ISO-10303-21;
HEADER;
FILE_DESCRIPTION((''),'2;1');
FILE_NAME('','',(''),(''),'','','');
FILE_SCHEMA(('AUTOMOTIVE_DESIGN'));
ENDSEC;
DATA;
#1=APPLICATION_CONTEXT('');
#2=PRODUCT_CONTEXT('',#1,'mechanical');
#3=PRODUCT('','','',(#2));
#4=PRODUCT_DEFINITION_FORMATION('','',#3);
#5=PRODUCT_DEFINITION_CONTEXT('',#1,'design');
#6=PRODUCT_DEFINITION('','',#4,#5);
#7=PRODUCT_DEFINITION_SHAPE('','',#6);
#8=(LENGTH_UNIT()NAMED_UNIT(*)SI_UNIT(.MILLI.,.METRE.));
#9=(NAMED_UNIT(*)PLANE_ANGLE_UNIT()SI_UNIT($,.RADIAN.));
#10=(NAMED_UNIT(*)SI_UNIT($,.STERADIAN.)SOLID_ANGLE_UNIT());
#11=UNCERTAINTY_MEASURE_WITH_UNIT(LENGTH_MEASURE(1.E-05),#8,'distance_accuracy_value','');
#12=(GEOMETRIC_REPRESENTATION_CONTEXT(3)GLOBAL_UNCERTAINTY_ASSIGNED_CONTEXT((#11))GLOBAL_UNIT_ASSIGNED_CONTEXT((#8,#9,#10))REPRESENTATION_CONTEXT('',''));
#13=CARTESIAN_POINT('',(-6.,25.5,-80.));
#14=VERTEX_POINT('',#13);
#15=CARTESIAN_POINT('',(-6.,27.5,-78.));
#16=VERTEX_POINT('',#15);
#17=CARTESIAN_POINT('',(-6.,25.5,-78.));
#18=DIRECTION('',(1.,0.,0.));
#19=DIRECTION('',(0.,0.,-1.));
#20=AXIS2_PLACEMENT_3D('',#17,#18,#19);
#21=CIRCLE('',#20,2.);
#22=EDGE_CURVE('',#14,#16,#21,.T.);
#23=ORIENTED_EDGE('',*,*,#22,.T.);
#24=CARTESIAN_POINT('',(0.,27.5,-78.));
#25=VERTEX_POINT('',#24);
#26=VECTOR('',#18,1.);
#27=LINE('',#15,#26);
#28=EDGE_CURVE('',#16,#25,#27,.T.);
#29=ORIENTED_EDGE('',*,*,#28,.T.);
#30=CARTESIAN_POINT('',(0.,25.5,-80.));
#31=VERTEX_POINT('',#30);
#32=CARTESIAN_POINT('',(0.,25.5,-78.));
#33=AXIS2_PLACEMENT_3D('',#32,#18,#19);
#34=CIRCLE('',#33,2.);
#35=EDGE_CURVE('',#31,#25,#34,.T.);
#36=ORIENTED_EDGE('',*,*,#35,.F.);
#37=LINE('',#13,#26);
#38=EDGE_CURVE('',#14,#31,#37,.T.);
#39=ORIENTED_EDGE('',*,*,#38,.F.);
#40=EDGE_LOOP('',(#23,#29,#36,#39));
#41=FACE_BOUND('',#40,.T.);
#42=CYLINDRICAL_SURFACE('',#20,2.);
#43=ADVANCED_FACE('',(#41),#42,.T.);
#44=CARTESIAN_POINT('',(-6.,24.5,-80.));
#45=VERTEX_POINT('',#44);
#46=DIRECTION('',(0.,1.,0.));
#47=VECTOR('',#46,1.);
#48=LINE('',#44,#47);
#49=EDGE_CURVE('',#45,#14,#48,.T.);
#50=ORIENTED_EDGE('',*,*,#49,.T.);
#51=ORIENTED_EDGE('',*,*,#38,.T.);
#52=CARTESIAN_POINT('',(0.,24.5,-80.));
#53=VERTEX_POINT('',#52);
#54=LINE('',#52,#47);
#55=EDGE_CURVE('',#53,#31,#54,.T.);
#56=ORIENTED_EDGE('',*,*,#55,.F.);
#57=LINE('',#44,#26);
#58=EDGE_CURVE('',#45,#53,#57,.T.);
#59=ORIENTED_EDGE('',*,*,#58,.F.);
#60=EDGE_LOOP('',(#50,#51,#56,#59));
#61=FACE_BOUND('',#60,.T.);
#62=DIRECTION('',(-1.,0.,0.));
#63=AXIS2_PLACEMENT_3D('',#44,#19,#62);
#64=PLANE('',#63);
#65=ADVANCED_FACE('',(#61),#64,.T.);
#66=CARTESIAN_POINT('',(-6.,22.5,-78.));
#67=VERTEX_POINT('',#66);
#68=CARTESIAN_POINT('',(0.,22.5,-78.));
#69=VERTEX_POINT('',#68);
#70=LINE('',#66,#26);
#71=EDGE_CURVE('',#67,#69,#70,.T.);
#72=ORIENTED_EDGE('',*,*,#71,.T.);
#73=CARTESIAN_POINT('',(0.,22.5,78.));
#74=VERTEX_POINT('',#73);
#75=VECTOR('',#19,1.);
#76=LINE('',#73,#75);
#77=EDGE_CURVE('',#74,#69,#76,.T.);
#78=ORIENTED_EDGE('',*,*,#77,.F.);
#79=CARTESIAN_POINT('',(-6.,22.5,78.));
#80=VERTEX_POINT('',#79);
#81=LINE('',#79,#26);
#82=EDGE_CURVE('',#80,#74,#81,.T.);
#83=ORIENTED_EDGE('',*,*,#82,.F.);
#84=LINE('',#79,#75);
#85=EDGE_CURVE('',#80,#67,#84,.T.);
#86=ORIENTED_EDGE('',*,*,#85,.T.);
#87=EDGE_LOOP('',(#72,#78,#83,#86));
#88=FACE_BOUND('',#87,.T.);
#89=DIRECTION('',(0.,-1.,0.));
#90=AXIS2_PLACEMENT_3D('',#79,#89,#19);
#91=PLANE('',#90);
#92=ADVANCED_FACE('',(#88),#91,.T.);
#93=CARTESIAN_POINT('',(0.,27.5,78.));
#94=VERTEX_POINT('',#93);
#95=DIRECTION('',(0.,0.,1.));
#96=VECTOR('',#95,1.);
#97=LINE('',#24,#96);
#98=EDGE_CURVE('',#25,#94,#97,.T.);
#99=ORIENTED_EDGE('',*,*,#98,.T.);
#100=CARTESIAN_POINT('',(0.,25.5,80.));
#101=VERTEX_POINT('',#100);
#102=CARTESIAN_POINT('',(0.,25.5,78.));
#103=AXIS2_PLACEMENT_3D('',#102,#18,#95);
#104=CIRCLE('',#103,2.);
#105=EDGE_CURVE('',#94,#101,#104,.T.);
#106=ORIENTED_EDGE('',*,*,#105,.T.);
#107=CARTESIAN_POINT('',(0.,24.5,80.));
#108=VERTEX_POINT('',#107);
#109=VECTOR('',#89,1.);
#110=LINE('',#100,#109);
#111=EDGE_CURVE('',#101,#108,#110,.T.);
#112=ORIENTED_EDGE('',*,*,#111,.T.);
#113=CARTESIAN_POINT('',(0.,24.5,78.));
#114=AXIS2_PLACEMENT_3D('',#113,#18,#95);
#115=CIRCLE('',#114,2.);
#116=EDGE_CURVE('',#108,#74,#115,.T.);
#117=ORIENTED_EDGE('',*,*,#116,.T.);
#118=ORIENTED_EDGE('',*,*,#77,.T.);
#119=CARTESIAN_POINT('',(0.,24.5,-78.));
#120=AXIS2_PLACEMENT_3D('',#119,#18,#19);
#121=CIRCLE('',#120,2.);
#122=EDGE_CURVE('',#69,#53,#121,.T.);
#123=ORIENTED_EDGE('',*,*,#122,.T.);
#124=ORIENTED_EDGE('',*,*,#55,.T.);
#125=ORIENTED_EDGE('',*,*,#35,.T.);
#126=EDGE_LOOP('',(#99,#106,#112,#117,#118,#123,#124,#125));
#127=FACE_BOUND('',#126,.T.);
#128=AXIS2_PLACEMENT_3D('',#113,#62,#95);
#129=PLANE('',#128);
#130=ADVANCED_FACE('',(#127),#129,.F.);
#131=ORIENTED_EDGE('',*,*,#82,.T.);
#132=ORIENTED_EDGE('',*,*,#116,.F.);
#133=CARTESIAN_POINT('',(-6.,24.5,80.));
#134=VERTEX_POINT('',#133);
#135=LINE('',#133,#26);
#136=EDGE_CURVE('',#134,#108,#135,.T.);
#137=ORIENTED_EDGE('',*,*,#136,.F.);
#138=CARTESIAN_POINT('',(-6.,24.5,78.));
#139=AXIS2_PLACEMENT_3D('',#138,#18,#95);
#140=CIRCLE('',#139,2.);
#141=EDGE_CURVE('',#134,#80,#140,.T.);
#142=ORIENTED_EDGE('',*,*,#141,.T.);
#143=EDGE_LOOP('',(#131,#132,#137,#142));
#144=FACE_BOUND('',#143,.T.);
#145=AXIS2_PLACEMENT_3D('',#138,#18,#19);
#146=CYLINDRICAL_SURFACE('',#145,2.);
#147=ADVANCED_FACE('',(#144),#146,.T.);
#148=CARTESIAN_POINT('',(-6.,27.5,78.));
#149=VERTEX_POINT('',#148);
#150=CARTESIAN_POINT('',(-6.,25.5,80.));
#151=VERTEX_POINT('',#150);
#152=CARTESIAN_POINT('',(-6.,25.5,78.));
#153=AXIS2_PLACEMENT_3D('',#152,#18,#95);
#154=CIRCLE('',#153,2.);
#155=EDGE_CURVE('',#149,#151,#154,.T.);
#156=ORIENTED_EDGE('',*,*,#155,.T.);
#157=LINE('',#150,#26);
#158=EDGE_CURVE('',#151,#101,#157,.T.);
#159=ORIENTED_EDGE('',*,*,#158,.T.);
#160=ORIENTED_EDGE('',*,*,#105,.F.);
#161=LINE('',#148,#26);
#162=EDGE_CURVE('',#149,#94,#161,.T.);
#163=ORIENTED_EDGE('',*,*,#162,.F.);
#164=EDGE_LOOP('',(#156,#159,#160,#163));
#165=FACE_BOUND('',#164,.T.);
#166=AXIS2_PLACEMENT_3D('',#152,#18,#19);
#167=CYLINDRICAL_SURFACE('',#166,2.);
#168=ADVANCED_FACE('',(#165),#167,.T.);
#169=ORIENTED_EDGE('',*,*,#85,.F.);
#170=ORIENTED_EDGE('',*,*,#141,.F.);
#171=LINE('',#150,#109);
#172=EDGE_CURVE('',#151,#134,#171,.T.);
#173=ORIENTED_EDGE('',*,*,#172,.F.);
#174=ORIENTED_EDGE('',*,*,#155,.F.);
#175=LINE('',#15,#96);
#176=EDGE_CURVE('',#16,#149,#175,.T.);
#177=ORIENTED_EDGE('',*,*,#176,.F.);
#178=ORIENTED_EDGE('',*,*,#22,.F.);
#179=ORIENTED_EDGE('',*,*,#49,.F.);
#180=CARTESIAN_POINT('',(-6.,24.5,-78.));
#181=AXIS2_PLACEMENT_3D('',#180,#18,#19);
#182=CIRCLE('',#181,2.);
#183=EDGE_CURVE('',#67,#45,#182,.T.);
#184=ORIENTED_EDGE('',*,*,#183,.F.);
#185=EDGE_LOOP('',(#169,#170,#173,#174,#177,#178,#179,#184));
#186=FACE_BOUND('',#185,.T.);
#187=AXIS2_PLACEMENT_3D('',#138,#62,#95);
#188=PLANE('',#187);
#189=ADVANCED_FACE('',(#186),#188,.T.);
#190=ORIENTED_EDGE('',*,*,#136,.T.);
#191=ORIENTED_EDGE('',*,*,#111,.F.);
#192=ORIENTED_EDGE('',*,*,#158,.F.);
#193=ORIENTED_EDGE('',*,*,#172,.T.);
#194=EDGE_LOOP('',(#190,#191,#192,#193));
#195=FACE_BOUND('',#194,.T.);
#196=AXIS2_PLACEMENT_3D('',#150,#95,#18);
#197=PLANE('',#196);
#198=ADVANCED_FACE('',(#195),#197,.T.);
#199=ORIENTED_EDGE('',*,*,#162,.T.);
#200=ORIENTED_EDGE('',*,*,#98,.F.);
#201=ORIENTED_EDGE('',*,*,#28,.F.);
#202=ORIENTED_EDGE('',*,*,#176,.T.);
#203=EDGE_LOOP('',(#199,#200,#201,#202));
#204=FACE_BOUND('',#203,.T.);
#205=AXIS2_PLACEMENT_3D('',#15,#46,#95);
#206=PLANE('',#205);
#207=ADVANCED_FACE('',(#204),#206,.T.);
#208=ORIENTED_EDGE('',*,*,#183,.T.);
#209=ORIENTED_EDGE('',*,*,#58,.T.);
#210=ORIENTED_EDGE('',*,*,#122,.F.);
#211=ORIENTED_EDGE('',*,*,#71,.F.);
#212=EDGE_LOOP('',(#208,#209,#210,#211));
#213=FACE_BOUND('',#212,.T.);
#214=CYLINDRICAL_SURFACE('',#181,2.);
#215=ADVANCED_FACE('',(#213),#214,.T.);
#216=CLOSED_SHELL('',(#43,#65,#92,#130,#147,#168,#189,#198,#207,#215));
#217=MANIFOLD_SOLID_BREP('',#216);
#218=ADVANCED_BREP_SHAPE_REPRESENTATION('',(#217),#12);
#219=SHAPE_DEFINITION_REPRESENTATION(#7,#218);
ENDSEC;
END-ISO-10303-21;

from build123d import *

# Parameters (mm, degrees)
BOSS_EXTRUDE1_START = -6
BOSS_EXTRUDE1_DEPTH = 6


with BuildPart() as part:
    # Boss-Extrude1: read off the stored shape, not the designer's step
    # Boss-Extrude1 outline → Boss-Extrude1 (new body)
    with BuildSketch(Plane(origin=(0, 22.5, 0), x_dir=(0, 0, -1), z_dir=(1, 0, 0)).offset(BOSS_EXTRUDE1_START)):
        with BuildLine():
            Line((-80, 3), (-80, 2))
            ThreePointArc((-80, 2), (-79.414213562, 0.585786438), (-78, 0))
            Line((-78, 0), (78, 0))
            ThreePointArc((78, 0), (79.414213562, 0.585786438), (80, 2))
            Line((80, 2), (80, 3))
            ThreePointArc((80, 3), (79.414213562, 4.414213562), (78, 5))
            Line((78, 5), (-78, 5))
            ThreePointArc((-78, 5), (-79.414213562, 4.414213562), (-80, 3))
        make_face()
    extrude(amount=BOSS_EXTRUDE1_DEPTH)


solid = part.part
